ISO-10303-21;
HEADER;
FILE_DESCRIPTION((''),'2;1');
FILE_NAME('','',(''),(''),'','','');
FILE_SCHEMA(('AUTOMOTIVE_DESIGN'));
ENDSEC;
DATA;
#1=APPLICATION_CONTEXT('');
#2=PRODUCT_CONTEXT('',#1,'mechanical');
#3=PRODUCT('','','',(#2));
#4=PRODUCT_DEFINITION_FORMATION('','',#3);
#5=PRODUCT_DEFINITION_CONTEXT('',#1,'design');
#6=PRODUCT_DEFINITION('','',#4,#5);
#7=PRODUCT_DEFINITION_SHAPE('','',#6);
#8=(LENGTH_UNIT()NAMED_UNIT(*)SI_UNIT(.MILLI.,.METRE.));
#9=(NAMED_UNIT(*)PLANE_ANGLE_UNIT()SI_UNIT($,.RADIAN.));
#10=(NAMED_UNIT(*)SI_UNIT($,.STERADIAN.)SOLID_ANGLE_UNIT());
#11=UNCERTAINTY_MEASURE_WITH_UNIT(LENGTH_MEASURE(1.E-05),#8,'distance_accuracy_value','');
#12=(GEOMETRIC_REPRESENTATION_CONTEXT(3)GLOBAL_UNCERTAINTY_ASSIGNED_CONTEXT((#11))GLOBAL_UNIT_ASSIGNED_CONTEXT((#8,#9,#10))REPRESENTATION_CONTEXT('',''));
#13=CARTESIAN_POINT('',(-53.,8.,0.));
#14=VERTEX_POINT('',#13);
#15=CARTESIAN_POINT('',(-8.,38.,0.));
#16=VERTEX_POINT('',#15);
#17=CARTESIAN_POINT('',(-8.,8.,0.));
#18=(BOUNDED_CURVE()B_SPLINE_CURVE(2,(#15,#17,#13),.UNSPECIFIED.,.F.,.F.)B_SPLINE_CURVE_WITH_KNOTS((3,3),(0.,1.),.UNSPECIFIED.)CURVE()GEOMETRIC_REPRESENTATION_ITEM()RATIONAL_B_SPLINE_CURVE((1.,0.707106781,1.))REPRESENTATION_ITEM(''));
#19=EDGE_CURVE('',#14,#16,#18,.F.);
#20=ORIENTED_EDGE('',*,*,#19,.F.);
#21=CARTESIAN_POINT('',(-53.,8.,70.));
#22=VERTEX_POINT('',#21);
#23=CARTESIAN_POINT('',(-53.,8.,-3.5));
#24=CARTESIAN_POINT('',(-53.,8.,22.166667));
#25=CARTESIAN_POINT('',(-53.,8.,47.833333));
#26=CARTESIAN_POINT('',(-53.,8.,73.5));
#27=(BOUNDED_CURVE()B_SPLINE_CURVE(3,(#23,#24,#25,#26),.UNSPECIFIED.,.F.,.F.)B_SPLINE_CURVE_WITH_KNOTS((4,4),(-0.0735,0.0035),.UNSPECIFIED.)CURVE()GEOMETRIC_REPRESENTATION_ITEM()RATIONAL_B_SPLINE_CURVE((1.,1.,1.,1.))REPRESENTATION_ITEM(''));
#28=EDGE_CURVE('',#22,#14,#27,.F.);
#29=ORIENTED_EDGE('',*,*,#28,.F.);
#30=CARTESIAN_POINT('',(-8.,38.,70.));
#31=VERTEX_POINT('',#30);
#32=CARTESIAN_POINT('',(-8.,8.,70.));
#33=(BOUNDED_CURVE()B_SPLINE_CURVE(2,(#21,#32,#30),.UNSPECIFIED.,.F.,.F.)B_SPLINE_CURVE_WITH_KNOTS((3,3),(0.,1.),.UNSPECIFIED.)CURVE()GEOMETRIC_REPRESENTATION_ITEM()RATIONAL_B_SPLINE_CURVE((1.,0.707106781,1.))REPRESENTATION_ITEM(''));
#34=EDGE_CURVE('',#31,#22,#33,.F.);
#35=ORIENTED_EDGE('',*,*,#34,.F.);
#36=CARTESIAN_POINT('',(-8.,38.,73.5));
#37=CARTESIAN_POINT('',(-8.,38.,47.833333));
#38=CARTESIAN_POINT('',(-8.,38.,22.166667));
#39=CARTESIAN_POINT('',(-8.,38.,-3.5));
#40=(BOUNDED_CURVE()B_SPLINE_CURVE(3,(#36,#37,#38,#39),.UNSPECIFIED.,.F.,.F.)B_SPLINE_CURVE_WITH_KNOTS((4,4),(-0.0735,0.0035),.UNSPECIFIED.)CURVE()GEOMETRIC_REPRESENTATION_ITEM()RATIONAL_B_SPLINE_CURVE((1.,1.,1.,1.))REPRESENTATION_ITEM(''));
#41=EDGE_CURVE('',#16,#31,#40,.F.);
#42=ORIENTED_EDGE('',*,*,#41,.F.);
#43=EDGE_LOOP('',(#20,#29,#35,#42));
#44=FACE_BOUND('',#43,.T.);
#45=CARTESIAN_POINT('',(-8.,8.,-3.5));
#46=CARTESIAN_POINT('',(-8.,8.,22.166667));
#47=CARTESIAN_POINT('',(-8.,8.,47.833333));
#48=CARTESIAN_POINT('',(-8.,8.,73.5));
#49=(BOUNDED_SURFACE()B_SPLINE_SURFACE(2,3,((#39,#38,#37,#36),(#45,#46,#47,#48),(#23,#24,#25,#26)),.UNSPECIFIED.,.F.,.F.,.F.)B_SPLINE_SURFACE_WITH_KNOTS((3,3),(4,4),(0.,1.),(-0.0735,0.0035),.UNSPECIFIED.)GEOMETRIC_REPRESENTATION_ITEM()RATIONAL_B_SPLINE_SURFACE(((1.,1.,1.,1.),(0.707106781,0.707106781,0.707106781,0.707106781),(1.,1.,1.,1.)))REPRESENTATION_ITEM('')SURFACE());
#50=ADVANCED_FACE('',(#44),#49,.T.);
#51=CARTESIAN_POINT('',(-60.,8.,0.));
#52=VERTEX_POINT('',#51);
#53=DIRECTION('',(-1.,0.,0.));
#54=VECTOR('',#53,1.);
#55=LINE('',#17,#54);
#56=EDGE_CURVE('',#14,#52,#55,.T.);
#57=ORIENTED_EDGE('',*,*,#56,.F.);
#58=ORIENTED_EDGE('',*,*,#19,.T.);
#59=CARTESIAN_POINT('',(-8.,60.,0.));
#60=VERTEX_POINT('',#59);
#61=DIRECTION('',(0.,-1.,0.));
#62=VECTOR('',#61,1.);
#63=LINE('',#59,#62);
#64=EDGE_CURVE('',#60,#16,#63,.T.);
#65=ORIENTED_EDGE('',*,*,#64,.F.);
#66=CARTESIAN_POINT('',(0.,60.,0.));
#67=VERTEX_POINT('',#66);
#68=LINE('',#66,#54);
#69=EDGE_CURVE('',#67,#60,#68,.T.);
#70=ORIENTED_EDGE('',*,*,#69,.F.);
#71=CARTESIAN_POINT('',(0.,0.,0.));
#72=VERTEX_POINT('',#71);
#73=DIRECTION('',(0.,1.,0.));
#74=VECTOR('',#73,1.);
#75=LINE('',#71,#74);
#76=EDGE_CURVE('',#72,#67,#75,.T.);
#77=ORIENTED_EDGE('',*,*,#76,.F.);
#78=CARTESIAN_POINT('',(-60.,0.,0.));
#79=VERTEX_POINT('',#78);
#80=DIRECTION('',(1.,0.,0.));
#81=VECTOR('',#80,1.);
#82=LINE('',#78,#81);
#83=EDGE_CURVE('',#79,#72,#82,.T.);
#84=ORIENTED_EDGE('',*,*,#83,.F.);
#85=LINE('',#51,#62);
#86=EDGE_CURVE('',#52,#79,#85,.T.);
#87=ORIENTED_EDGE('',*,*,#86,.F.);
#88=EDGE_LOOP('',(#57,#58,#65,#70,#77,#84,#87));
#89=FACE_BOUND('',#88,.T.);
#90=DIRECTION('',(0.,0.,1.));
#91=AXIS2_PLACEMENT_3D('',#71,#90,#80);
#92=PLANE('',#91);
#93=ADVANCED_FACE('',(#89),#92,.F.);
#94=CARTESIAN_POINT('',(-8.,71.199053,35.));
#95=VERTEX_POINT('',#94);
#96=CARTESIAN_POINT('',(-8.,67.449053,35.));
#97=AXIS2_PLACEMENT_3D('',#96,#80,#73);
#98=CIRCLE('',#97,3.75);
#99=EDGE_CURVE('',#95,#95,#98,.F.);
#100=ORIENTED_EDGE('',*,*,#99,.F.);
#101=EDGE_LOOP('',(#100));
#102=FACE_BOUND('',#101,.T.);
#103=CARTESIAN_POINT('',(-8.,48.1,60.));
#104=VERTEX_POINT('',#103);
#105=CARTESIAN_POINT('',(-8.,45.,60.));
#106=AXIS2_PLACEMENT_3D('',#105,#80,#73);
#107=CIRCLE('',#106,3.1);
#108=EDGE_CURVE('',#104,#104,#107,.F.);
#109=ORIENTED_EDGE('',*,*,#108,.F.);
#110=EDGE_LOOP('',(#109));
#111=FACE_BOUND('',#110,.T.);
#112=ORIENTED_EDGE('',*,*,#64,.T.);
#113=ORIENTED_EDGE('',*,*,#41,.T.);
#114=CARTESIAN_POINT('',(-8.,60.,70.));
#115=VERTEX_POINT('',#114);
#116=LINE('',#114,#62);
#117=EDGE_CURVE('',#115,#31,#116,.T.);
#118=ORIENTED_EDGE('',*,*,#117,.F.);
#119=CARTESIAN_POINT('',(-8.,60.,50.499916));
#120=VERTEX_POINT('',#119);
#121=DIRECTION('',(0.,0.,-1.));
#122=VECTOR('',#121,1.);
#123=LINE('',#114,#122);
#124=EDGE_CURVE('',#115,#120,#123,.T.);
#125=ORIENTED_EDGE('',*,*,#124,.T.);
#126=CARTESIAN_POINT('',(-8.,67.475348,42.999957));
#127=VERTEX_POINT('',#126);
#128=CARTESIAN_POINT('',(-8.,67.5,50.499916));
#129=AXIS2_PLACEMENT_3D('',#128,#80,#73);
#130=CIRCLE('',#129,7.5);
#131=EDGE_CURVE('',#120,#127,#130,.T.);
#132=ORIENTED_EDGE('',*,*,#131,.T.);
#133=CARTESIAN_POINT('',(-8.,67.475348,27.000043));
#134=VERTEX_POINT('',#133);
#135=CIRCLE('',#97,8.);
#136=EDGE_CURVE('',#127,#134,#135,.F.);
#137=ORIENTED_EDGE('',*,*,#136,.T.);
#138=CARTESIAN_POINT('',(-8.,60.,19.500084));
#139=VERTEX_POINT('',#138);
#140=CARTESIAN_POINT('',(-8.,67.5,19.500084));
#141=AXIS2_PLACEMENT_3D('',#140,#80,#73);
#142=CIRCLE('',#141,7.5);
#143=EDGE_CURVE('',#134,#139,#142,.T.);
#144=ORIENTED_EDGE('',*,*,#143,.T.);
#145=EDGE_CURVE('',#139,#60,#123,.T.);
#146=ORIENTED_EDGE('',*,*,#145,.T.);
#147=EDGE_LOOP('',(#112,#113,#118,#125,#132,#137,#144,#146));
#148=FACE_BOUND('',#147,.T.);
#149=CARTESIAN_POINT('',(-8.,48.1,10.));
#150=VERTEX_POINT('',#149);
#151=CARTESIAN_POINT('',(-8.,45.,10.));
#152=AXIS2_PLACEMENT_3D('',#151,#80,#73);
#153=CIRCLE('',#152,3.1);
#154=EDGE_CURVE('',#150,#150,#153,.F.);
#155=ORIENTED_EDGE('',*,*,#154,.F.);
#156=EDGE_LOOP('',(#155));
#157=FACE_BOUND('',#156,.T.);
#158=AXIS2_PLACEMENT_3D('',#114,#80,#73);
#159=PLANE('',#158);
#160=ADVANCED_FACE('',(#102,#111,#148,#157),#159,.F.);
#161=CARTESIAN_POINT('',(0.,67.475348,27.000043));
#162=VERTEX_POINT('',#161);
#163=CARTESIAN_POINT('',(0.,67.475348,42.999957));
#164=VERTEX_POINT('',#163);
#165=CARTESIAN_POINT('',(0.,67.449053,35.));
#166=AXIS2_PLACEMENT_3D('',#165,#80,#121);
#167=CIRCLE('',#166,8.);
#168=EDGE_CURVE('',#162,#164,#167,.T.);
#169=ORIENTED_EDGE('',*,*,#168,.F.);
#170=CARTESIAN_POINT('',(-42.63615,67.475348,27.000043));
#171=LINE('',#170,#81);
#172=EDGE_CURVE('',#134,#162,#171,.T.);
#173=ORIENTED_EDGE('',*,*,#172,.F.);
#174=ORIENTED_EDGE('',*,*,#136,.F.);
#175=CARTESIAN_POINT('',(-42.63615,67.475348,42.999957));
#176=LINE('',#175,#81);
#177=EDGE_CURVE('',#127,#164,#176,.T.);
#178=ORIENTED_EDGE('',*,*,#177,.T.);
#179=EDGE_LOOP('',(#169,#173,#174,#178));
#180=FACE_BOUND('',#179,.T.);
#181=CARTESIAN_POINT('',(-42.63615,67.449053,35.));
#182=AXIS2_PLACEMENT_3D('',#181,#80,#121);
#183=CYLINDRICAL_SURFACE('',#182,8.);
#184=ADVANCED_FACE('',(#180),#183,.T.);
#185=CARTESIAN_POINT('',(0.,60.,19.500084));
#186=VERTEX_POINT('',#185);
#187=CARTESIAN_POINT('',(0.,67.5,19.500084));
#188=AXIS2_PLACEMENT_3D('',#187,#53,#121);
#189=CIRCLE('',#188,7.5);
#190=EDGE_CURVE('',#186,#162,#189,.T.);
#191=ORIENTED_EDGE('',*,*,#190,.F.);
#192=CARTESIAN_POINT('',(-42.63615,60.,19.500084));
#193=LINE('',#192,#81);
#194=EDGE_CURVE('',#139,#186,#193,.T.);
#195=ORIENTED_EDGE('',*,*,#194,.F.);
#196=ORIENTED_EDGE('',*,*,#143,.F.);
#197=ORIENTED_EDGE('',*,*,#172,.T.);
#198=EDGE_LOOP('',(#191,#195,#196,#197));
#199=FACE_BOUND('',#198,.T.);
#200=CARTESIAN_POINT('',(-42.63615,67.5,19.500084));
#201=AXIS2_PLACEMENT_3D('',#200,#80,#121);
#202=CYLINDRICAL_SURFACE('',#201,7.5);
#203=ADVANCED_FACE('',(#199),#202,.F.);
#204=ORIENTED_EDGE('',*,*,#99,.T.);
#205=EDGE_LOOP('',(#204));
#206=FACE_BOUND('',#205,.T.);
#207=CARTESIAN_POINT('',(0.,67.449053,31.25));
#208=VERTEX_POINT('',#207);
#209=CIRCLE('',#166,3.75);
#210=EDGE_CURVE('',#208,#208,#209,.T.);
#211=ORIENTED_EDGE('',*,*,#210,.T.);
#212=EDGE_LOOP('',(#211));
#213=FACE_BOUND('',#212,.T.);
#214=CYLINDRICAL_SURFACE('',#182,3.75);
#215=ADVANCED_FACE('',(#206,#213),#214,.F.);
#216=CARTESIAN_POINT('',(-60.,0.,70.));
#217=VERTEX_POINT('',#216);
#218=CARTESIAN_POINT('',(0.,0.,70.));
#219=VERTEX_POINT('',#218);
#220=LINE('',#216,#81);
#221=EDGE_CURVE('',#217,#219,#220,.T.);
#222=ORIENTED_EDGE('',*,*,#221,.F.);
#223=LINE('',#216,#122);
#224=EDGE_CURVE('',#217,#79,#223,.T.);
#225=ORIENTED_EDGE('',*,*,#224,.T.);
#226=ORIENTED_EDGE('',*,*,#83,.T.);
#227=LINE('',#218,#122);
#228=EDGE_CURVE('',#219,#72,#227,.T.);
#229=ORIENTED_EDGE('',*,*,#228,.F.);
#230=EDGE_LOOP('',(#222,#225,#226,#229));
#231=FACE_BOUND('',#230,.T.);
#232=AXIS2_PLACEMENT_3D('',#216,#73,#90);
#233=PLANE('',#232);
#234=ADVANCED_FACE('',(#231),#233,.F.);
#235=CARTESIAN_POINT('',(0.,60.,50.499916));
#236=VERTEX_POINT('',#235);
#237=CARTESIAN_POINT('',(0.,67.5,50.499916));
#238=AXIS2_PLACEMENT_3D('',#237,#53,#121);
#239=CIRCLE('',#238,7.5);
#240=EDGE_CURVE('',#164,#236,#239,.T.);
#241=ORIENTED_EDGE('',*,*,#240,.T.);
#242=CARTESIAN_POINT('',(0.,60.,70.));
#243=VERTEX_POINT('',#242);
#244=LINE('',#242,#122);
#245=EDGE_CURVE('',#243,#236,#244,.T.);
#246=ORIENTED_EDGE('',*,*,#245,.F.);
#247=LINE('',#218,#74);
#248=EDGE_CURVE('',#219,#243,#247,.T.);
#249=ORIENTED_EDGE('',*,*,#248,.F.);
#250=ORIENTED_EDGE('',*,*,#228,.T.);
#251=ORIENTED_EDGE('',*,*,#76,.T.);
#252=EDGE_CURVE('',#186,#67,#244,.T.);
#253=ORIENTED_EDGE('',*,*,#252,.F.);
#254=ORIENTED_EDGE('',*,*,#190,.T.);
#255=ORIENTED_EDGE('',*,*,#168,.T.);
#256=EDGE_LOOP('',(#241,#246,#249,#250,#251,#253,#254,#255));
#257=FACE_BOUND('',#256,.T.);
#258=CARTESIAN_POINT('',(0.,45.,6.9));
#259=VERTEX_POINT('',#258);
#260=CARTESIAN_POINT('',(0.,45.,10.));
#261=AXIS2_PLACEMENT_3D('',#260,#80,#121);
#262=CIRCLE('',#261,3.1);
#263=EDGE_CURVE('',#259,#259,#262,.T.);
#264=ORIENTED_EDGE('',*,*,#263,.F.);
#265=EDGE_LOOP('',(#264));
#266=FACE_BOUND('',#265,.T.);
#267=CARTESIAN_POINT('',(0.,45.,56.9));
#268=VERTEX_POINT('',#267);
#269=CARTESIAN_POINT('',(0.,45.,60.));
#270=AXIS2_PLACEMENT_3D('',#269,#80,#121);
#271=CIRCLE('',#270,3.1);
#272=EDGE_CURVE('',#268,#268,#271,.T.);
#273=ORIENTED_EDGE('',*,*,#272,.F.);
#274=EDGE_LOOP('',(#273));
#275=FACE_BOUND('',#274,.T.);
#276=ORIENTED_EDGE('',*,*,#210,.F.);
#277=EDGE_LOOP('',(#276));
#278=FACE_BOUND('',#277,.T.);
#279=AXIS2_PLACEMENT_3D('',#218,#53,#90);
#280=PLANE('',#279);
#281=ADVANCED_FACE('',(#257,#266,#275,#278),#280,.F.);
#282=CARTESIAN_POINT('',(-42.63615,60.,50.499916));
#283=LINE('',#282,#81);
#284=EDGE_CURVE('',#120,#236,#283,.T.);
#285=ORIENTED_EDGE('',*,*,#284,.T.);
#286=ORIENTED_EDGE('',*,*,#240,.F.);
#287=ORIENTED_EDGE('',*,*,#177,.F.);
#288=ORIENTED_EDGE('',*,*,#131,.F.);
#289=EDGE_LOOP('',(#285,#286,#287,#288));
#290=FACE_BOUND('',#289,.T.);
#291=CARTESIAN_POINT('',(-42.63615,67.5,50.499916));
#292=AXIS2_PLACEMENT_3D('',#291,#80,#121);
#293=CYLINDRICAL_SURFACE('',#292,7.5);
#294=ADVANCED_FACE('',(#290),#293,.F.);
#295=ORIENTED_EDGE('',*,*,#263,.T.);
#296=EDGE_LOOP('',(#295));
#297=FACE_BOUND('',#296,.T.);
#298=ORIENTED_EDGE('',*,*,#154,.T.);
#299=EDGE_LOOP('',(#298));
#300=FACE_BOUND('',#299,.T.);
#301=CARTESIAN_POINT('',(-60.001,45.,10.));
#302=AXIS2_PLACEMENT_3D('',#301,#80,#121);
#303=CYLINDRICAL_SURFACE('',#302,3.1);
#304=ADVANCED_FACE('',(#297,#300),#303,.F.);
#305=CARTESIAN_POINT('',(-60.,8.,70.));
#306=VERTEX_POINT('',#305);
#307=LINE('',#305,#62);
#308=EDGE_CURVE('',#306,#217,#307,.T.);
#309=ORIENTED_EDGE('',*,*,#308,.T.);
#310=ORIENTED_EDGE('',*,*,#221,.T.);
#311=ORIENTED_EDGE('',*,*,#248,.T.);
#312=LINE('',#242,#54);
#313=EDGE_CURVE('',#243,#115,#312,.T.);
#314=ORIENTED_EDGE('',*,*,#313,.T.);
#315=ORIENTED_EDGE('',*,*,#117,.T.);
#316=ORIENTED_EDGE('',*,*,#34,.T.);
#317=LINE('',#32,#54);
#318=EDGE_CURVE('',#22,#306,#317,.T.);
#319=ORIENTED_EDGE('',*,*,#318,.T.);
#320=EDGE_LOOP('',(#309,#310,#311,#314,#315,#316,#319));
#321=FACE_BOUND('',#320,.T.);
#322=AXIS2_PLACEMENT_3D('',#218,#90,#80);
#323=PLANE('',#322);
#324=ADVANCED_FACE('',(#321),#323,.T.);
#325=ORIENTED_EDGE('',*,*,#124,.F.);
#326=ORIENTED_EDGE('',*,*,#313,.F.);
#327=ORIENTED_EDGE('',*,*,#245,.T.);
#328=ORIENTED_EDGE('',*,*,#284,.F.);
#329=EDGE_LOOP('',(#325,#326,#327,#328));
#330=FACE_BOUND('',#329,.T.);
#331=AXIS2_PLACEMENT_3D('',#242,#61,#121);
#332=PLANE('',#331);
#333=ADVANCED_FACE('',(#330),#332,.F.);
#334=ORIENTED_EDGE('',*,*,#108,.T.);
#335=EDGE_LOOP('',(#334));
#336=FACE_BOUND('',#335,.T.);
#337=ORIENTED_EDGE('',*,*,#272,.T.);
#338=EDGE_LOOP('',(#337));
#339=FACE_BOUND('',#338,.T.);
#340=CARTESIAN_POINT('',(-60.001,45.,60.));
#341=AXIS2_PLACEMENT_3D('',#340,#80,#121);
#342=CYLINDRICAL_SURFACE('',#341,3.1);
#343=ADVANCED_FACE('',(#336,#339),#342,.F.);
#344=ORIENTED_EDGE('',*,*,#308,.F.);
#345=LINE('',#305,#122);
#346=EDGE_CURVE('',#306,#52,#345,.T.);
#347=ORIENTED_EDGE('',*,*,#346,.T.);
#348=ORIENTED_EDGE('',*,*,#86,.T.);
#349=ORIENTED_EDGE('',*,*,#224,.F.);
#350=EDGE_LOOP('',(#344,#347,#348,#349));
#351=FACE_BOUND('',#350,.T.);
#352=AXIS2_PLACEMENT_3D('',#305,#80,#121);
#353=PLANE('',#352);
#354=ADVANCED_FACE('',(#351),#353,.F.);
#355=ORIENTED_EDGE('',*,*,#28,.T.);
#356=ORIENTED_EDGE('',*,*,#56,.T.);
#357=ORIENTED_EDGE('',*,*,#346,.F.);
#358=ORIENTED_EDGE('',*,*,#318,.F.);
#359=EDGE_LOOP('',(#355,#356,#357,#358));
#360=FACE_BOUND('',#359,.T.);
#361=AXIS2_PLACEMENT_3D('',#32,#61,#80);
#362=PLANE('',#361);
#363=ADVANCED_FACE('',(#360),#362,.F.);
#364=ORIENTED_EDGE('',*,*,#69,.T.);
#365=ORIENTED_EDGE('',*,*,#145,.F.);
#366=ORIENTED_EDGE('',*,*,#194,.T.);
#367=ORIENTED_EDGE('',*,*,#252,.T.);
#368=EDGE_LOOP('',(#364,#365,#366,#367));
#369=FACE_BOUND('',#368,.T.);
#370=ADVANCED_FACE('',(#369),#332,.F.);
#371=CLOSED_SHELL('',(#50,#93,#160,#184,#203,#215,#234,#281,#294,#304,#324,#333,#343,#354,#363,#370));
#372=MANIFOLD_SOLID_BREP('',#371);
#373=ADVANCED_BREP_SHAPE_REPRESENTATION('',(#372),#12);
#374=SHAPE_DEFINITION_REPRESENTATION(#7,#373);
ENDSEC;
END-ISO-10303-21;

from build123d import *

# Parameters (mm, degrees)
RESSALTO_EXTRUS_O1_DEPTH = 70
CORTE_EXTRUS_O1_REACH    = 112
ESBO_O2_R                = 3.1
FILETE1_SIZE             = 30
FILETE1_SIZE_2           = 45
ESBO_O3_R                = 3.75
RESSALTO_EXTRUS_O2_DEPTH = 8


with BuildPart() as part:
    # Esboço1 → Ressalto-extrusão1 (new body)
    with BuildSketch(Plane.XY):
        Polygon((0, 0), (0, 60), (-8, 60), (-8, 8), (-60, 8), (-60, 0), align=None)
    extrude(amount=RESSALTO_EXTRUS_O1_DEPTH)

    # Esboço2 → Corte-extrusão1 (cut, up to next)
    with BuildSketch(Plane(origin=(0, 0, 0), x_dir=(0, 0, -1), z_dir=(1, 0, 0)), mode=Mode.PRIVATE) as corte_extrus_o1_sk1:
        with Locations((-60, 45)):
            Circle(ESBO_O2_R)
    corte_extrus_o1_tool1 = extrude(corte_extrus_o1_sk1.sketch, amount=-CORTE_EXTRUS_O1_REACH, mode=Mode.PRIVATE) & part.part
    # Esboço2 → Corte-extrusão1 (cut, up to next)
    with BuildSketch(Plane(origin=(0, 0, 0), x_dir=(0, 0, -1), z_dir=(1, 0, 0)), mode=Mode.PRIVATE) as corte_extrus_o1_sk2:
        with Locations((-10, 45)):
            Circle(ESBO_O2_R)
    corte_extrus_o1_tool2 = extrude(corte_extrus_o1_sk2.sketch, amount=-CORTE_EXTRUS_O1_REACH, mode=Mode.PRIVATE) & part.part
    add(corte_extrus_o1_tool1.solids().sort_by_distance((0, 45, 60))[0], mode=Mode.SUBTRACT)
    add(corte_extrus_o1_tool2.solids().sort_by_distance((0, 45, 10))[0], mode=Mode.SUBTRACT)

    # Filete1
    # an asymmetric fillet: 45, 30 mm, written as the material it adds along each edge
    with BuildSketch(Plane(origin=(-8, 8, 0), x_dir=(0, 1, 0), z_dir=(0, 0, 1))) as filete1_piece_1:
        with BuildLine():
            Bezier((FILETE1_SIZE, 0), (0, 0), (0, FILETE1_SIZE_2), weights=[1, 0.707106781, 1])
            Line((0, FILETE1_SIZE_2), (0, 0))
            Line((0, 0), (FILETE1_SIZE, 0))
        make_face()
    extrude(amount=70)

    # Esboço3 → Ressalto-extrusão2 (add)
    with BuildSketch(Plane(origin=(0, 0, 0), x_dir=(0, 0, -1), z_dir=(1, 0, 0))):
        with BuildLine():
            Line((-50.499916272, 60), (-19.500083728, 60))
            ThreePointArc((-19.500083728, 60), (-24.794661769, 62.187990647), (-27.000043214, 67.475348435))
            ThreePointArc((-27.000043214, 67.475348435), (-35, 75.449053432), (-42.999956786, 67.475348435))
            ThreePointArc((-42.999956786, 67.475348435), (-45.205338231, 62.187990647), (-50.499916272, 60))
        make_face()
        with Locations((-35, 67.449053432)):
            Circle(ESBO_O3_R, mode=Mode.SUBTRACT)
    extrude(amount=-RESSALTO_EXTRUS_O2_DEPTH)


solid = part.part
